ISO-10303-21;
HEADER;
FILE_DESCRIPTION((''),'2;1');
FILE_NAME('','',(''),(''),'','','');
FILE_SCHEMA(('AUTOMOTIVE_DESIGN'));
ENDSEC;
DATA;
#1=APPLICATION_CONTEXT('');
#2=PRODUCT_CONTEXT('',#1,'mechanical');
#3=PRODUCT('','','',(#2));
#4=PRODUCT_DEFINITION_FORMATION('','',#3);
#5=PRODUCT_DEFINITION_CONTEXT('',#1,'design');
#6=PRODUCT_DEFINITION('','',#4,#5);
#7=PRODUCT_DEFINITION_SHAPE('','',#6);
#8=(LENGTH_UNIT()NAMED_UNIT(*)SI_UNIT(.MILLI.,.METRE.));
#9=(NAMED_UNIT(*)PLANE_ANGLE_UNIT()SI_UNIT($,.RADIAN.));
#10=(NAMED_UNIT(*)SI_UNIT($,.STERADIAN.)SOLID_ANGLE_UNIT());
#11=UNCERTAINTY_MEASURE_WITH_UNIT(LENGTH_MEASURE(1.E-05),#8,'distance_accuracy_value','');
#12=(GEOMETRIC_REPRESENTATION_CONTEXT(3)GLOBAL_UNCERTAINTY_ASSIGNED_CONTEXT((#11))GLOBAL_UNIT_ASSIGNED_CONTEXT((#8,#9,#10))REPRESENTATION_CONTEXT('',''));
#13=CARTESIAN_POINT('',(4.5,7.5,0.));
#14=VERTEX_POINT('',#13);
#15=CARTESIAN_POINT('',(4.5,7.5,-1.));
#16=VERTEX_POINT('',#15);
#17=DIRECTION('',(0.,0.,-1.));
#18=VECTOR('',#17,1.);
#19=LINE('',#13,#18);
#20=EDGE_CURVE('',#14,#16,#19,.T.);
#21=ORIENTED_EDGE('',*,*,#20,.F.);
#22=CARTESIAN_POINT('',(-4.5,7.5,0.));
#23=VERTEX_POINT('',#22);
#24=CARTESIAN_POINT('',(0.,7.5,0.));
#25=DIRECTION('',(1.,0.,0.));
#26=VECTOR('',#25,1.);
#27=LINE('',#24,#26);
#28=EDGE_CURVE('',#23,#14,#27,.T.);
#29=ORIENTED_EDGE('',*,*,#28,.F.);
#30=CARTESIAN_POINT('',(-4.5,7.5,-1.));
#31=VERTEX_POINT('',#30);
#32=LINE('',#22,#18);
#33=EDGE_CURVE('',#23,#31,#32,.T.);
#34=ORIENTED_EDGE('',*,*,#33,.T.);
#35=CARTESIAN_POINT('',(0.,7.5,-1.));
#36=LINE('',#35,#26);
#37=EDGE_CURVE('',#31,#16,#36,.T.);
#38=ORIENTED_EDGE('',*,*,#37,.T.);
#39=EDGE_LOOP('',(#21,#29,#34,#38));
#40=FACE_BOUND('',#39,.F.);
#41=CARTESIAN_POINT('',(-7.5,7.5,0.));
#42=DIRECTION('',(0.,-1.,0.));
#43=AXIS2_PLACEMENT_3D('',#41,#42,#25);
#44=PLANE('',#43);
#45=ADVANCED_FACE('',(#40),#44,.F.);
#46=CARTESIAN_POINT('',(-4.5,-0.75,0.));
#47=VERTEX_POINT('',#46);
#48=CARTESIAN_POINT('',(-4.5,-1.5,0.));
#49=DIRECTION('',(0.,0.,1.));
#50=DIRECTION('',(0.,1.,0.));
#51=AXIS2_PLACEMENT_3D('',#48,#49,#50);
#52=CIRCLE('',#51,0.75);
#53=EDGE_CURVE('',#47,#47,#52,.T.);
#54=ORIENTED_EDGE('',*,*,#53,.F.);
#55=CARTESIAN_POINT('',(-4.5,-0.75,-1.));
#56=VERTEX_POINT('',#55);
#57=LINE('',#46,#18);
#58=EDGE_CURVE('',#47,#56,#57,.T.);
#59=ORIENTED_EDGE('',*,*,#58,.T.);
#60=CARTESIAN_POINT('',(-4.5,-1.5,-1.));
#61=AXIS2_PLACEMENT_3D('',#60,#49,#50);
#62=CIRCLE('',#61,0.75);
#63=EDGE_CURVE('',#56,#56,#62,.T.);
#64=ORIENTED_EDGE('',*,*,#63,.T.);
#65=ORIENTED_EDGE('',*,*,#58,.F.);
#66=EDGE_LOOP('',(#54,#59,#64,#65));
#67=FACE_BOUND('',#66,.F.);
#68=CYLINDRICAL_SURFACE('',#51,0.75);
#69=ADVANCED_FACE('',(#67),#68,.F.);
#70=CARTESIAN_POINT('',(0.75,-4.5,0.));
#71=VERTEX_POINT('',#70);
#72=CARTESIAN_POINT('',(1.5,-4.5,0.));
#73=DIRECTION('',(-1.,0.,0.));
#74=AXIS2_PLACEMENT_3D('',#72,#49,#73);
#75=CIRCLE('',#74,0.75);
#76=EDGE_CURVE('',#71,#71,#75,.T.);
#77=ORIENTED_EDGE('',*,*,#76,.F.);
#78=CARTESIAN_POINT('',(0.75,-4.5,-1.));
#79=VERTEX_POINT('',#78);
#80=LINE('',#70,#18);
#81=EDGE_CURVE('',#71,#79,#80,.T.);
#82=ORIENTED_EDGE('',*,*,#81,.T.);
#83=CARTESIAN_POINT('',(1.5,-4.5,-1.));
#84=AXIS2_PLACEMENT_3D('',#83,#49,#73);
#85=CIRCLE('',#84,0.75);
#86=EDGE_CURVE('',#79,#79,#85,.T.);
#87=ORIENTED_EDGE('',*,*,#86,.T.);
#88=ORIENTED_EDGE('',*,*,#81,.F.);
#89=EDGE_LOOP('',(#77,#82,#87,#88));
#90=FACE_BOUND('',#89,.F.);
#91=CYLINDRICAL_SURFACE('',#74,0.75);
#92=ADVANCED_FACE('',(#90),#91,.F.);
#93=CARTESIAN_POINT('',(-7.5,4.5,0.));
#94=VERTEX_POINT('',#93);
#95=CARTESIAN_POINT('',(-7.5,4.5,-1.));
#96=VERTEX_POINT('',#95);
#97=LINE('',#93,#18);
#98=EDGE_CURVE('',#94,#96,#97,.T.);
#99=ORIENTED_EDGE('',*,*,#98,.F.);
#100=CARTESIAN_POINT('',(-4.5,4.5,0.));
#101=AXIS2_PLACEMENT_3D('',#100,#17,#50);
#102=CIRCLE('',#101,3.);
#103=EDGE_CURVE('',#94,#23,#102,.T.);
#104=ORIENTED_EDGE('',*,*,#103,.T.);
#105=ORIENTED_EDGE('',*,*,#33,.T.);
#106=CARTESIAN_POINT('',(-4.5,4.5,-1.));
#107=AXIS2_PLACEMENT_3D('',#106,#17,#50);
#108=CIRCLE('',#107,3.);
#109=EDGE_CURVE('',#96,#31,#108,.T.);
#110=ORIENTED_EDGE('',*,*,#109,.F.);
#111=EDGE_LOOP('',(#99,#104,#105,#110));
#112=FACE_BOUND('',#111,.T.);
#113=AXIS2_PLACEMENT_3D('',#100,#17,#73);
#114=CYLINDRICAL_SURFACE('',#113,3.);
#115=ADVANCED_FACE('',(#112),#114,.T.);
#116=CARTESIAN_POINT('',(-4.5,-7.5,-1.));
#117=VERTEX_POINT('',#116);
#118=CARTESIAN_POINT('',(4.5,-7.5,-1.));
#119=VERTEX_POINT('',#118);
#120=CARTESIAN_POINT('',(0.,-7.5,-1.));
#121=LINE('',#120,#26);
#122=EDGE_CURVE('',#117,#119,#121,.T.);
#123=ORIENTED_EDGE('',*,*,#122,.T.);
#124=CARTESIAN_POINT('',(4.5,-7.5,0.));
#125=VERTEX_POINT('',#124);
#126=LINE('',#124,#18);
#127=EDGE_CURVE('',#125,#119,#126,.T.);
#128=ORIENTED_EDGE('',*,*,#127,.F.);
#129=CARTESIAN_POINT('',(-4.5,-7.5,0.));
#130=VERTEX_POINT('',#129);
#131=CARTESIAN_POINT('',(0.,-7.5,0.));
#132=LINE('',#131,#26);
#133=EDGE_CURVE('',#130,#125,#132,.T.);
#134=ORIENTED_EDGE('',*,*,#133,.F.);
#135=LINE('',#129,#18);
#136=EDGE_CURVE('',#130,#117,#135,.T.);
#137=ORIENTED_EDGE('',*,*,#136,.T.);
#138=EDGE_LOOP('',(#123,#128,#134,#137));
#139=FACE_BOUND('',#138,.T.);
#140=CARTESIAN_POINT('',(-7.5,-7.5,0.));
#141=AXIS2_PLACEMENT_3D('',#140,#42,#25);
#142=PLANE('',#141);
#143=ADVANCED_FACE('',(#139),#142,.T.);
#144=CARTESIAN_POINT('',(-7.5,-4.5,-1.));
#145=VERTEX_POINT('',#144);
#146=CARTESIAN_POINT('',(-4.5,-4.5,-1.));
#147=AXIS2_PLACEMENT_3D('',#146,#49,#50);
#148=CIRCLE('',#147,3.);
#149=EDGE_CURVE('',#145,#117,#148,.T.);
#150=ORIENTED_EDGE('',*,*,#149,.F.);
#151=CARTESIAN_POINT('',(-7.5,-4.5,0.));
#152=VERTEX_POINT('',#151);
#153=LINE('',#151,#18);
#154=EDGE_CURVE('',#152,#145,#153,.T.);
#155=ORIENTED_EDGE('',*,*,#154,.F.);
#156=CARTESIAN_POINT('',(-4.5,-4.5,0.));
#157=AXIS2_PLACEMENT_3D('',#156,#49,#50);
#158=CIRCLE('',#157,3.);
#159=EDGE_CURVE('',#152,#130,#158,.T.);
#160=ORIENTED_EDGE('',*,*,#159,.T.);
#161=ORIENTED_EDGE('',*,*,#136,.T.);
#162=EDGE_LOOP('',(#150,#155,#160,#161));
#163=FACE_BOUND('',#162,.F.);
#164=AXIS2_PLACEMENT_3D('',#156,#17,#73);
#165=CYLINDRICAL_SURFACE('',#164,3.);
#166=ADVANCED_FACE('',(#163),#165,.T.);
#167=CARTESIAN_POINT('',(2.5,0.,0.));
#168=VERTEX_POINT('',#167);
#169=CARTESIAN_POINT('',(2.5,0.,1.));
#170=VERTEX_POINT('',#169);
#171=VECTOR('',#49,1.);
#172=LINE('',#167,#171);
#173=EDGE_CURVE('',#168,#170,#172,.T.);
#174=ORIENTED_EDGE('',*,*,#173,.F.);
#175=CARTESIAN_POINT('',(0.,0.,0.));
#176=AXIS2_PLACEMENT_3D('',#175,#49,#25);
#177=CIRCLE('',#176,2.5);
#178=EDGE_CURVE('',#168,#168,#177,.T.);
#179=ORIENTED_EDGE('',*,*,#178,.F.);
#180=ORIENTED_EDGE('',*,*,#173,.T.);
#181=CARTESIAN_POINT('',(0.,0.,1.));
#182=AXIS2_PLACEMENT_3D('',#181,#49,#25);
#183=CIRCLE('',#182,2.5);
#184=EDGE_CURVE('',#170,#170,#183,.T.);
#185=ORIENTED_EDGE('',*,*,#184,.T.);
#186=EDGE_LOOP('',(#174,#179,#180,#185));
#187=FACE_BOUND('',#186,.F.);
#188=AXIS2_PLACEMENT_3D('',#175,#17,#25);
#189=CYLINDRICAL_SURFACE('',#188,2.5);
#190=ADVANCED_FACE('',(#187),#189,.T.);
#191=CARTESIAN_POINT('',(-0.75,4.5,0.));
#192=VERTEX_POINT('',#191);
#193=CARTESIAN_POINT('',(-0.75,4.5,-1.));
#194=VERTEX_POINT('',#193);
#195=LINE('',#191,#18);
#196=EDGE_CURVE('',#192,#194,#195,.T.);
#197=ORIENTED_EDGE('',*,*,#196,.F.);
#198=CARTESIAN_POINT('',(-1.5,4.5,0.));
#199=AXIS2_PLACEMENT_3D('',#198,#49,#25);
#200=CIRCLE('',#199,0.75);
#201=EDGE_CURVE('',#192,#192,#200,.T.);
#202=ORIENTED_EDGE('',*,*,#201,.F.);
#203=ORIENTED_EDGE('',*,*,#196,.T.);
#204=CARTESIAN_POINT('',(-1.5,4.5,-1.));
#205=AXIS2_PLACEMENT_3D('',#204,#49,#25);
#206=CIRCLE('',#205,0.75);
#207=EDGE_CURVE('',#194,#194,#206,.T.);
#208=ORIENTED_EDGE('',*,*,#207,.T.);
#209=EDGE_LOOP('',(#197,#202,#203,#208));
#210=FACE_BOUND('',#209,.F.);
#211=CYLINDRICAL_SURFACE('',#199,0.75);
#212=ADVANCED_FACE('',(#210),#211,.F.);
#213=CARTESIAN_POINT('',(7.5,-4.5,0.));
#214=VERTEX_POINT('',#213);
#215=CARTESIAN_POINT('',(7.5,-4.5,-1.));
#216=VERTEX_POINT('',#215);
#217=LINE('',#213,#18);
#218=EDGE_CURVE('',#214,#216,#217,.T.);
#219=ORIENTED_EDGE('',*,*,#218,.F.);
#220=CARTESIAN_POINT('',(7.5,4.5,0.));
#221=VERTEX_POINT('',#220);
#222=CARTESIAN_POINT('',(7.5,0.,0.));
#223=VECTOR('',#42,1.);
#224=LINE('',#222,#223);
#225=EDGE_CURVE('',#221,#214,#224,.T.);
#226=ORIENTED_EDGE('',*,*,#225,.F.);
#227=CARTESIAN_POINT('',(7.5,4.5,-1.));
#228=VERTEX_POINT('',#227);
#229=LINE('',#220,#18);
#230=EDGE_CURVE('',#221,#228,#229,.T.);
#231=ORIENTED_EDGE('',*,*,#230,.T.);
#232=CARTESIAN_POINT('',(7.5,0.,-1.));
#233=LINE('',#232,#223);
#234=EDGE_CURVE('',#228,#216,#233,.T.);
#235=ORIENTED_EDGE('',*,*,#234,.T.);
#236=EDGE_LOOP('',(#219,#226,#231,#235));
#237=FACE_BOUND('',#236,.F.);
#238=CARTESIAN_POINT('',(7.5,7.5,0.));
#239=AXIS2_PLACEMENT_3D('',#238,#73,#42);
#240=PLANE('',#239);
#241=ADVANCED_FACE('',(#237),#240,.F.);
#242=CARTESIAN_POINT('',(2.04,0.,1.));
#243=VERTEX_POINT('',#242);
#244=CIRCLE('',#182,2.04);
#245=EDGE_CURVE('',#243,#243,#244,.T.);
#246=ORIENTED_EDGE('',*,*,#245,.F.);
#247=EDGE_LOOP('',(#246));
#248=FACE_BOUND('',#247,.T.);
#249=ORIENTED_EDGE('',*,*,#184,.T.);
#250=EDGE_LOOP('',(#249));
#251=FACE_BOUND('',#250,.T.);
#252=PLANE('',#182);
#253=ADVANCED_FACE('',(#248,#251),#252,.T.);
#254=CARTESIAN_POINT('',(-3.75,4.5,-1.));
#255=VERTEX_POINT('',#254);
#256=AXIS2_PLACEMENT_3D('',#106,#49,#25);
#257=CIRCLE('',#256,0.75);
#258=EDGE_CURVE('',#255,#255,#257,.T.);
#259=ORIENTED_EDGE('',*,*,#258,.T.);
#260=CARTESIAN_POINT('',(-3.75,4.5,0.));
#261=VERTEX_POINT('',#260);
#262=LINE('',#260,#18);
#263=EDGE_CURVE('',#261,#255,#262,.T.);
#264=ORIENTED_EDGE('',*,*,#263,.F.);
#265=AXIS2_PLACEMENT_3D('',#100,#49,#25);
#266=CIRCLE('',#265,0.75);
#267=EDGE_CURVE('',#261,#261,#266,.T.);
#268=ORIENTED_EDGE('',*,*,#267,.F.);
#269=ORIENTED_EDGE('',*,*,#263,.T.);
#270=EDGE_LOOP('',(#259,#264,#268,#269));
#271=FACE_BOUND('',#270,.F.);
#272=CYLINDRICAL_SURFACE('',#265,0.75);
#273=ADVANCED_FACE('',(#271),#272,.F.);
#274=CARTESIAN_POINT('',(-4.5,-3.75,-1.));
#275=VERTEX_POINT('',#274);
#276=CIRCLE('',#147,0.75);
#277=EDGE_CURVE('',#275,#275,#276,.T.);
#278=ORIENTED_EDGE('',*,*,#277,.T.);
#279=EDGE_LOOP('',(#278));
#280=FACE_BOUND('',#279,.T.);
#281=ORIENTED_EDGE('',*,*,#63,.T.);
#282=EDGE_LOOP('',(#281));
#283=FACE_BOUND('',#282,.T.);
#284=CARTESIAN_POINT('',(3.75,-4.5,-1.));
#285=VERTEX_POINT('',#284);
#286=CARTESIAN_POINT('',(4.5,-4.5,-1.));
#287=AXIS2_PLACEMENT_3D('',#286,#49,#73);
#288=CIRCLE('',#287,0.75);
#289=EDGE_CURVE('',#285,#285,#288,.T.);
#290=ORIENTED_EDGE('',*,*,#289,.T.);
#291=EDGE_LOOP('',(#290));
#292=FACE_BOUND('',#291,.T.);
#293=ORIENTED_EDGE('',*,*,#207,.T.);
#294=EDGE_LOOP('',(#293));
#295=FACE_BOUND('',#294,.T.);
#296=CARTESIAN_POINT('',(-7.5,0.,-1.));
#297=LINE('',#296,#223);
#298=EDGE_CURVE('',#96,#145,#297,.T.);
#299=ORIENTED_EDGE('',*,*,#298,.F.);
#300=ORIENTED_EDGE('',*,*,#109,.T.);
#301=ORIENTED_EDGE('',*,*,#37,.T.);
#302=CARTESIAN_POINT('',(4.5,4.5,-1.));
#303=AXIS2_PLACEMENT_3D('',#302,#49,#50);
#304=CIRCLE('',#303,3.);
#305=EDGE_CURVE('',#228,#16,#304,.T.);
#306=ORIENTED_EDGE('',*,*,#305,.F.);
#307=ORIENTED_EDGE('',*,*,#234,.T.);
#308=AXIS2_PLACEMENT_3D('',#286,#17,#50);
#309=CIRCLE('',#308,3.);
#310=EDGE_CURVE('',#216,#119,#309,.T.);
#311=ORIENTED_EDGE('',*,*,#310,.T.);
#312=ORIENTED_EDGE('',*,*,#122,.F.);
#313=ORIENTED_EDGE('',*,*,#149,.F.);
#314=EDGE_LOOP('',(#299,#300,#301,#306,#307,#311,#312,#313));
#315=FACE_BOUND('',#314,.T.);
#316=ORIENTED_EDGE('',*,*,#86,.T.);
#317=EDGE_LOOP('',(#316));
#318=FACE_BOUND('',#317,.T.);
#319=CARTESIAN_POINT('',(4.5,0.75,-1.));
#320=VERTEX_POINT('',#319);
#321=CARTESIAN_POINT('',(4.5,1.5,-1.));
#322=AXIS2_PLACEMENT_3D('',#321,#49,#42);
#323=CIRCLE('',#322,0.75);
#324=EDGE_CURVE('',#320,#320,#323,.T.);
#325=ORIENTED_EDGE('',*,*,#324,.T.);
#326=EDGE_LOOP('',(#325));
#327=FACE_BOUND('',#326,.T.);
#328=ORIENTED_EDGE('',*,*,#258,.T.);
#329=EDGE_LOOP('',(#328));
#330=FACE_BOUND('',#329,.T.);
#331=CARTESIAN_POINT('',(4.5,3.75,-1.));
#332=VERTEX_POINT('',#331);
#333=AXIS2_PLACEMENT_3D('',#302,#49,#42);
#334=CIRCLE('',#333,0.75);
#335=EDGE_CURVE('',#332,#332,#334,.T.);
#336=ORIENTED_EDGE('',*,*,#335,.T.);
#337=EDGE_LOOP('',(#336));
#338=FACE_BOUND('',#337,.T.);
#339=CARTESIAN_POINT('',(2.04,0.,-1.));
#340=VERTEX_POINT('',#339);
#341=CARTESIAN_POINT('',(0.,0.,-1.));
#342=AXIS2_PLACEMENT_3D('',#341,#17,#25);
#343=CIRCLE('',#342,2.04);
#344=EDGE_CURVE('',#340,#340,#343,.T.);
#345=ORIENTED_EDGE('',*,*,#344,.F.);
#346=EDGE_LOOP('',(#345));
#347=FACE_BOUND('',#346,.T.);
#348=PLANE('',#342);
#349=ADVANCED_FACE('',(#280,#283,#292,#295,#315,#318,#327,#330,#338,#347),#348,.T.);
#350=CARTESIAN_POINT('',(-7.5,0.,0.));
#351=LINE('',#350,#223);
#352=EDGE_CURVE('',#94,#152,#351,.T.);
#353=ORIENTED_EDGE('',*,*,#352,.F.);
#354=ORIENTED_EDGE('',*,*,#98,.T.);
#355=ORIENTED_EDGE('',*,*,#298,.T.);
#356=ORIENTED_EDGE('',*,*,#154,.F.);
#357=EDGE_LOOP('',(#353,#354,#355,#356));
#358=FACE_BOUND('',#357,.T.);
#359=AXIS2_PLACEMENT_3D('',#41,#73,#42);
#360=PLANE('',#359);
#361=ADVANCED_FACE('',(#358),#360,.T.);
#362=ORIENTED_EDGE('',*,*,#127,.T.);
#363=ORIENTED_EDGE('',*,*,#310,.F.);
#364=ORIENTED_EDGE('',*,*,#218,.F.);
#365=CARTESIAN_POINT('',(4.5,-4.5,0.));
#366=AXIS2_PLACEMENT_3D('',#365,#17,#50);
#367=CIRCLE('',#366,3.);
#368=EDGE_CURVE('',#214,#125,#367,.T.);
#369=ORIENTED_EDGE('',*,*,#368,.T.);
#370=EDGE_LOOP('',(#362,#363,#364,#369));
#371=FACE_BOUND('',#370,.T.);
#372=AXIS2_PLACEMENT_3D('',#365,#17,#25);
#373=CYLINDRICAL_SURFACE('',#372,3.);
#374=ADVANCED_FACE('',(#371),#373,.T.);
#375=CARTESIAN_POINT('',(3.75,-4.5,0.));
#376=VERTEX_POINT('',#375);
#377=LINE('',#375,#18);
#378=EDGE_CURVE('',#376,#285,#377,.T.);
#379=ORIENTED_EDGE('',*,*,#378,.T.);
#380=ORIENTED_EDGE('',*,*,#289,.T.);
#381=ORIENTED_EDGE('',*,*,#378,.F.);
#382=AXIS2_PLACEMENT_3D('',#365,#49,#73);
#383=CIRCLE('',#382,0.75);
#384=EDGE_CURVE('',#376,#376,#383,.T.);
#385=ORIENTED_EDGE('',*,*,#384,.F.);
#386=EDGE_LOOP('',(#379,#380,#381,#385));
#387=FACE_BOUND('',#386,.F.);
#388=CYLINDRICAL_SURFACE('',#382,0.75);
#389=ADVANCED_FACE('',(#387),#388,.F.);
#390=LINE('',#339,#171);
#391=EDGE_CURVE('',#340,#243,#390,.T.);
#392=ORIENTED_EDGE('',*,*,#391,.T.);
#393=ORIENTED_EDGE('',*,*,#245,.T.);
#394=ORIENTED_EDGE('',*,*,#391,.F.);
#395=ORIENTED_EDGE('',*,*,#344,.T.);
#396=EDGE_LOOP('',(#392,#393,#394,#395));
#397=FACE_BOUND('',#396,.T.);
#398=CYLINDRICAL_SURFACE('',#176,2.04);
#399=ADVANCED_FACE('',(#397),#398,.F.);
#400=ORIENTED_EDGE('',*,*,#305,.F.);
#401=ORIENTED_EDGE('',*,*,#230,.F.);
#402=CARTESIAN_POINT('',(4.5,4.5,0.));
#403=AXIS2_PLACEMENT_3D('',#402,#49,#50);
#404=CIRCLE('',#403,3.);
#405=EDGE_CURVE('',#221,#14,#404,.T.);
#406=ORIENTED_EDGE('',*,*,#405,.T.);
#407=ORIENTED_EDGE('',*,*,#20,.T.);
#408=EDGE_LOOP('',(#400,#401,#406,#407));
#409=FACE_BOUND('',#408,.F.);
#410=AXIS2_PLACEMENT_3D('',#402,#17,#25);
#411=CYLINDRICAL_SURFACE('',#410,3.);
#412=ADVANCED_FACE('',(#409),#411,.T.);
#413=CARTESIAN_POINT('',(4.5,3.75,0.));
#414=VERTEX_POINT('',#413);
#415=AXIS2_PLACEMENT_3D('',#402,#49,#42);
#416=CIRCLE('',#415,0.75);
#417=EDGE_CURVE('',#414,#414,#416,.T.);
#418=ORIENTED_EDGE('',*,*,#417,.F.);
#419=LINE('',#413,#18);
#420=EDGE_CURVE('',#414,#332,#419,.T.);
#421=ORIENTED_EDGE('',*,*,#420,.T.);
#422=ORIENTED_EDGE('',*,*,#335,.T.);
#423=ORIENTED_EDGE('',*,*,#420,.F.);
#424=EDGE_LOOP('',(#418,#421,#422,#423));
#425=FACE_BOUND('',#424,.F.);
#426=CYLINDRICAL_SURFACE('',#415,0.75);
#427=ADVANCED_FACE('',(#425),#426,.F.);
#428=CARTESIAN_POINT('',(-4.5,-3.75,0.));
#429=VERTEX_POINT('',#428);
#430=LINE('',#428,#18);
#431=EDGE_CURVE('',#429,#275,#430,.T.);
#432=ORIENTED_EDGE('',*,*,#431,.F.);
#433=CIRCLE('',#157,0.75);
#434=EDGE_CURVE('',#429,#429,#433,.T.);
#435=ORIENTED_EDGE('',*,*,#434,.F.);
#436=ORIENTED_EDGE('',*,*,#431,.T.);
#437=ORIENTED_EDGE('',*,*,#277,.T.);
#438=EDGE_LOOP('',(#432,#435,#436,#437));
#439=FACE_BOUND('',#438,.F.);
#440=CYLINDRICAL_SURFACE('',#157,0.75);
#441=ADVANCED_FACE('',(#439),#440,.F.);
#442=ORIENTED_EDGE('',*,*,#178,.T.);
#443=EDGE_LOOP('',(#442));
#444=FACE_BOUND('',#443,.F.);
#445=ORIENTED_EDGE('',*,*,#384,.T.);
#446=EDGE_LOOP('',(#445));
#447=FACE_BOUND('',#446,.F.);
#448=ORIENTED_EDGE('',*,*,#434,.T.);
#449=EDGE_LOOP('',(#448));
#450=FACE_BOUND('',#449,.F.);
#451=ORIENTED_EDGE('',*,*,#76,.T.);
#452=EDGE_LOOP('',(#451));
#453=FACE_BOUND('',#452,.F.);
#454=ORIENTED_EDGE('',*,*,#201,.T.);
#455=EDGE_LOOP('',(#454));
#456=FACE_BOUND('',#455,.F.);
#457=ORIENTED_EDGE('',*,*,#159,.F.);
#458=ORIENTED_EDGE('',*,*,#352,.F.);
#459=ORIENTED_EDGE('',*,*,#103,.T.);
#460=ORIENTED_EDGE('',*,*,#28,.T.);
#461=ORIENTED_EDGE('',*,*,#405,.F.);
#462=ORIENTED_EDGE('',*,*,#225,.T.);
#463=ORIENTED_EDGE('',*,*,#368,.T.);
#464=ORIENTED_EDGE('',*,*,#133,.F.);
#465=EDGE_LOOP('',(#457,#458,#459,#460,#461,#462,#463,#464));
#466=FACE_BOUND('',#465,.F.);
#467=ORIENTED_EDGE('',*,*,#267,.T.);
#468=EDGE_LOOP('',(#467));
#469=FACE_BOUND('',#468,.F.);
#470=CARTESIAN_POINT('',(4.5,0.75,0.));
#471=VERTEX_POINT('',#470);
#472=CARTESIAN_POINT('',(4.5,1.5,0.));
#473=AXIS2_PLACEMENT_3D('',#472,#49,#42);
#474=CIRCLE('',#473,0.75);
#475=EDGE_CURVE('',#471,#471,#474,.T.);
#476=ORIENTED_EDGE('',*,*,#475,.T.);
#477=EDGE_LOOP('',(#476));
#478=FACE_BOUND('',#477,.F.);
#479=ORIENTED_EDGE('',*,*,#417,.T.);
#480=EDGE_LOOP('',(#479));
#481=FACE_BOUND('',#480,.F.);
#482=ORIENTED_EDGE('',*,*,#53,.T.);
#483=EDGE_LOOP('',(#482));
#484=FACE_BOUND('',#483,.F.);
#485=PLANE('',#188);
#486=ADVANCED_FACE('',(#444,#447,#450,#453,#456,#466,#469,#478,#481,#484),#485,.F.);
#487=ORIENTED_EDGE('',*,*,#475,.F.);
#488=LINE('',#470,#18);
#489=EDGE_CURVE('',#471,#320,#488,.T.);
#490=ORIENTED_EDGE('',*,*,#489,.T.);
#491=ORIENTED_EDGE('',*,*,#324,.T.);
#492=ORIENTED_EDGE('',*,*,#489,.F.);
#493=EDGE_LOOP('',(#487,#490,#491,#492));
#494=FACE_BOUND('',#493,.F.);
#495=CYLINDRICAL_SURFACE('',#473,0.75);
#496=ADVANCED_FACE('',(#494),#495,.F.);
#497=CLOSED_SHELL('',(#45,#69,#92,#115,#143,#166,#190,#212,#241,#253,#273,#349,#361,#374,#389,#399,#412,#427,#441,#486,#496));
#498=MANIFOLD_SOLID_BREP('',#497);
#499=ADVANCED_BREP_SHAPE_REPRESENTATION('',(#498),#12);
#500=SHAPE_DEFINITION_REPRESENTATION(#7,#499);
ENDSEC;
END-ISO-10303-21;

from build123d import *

# Parameters (mm, degrees)
F0_R            = 2.5
F0_R_2          = 2.04
F1_DEPTH        = 1
F2_W            = 15
F2_H            = 15
F2_R            = 5
F2_R_2          = 2.5
F2_R_3          = 2.04
F3_DEPTH        = 1
F4_R            = 3
F5_R            = 0.75
F6_DEPTH        = 25
F6_COPIES_COUNT = 4


# Not quite as in the source:
# - a pattern or mirror of a feature is missing from the dataset's text; its kind, count and spacing are read off the source's solid


with BuildPart() as f1:
    # F0 (on Top) → F1 (new body)
    with BuildSketch(Plane.XY):
        Circle(F0_R)
        Circle(F0_R_2, mode=Mode.SUBTRACT)
    extrude(amount=F1_DEPTH)

    # F2 (on face) → F3 (join)
    with BuildSketch(Plane(origin=(0, 0, 0), x_dir=(1, 0, 0), z_dir=(0, 0, -1))):
        Rectangle(F2_W, F2_H)
        Circle(F2_R, mode=Mode.SUBTRACT)
        Circle(F2_R)
        Circle(F2_R_2, mode=Mode.SUBTRACT)
        Circle(F2_R_2)
        Circle(F2_R_3, mode=Mode.SUBTRACT)
    extrude(amount=F3_DEPTH)

    # F4
    f4_edges = [f1.edges().sort_by_distance(p)[0] for p in [
        (-7.5, 7.5, -0.5),
        (7.5, 7.5, -0.5),
        (-7.5, -7.5, -0.5),
        (7.5, -7.5, -0.5),
    ]]
    fillet(f4_edges, radius=F4_R)

    # F5 (on face) → F6 (cut)
    with BuildSketch(Plane.XY):
        with Locations((-4.5, 4.5)):
            Circle(F5_R)
        with Locations((-1.5, 4.5)):
            Circle(F5_R)
    f6 = extrude(amount=-F6_DEPTH, mode=Mode.SUBTRACT)

    # F6_copies: F6 ×4 about axis
    f6_copies_axis = Axis((0, 0, 0), (0, 0, 1))
    for i in range(1, F6_COPIES_COUNT):
        add(f6.rotate(f6_copies_axis, i * 360 / F6_COPIES_COUNT), mode=Mode.SUBTRACT)


solid = f1.part
